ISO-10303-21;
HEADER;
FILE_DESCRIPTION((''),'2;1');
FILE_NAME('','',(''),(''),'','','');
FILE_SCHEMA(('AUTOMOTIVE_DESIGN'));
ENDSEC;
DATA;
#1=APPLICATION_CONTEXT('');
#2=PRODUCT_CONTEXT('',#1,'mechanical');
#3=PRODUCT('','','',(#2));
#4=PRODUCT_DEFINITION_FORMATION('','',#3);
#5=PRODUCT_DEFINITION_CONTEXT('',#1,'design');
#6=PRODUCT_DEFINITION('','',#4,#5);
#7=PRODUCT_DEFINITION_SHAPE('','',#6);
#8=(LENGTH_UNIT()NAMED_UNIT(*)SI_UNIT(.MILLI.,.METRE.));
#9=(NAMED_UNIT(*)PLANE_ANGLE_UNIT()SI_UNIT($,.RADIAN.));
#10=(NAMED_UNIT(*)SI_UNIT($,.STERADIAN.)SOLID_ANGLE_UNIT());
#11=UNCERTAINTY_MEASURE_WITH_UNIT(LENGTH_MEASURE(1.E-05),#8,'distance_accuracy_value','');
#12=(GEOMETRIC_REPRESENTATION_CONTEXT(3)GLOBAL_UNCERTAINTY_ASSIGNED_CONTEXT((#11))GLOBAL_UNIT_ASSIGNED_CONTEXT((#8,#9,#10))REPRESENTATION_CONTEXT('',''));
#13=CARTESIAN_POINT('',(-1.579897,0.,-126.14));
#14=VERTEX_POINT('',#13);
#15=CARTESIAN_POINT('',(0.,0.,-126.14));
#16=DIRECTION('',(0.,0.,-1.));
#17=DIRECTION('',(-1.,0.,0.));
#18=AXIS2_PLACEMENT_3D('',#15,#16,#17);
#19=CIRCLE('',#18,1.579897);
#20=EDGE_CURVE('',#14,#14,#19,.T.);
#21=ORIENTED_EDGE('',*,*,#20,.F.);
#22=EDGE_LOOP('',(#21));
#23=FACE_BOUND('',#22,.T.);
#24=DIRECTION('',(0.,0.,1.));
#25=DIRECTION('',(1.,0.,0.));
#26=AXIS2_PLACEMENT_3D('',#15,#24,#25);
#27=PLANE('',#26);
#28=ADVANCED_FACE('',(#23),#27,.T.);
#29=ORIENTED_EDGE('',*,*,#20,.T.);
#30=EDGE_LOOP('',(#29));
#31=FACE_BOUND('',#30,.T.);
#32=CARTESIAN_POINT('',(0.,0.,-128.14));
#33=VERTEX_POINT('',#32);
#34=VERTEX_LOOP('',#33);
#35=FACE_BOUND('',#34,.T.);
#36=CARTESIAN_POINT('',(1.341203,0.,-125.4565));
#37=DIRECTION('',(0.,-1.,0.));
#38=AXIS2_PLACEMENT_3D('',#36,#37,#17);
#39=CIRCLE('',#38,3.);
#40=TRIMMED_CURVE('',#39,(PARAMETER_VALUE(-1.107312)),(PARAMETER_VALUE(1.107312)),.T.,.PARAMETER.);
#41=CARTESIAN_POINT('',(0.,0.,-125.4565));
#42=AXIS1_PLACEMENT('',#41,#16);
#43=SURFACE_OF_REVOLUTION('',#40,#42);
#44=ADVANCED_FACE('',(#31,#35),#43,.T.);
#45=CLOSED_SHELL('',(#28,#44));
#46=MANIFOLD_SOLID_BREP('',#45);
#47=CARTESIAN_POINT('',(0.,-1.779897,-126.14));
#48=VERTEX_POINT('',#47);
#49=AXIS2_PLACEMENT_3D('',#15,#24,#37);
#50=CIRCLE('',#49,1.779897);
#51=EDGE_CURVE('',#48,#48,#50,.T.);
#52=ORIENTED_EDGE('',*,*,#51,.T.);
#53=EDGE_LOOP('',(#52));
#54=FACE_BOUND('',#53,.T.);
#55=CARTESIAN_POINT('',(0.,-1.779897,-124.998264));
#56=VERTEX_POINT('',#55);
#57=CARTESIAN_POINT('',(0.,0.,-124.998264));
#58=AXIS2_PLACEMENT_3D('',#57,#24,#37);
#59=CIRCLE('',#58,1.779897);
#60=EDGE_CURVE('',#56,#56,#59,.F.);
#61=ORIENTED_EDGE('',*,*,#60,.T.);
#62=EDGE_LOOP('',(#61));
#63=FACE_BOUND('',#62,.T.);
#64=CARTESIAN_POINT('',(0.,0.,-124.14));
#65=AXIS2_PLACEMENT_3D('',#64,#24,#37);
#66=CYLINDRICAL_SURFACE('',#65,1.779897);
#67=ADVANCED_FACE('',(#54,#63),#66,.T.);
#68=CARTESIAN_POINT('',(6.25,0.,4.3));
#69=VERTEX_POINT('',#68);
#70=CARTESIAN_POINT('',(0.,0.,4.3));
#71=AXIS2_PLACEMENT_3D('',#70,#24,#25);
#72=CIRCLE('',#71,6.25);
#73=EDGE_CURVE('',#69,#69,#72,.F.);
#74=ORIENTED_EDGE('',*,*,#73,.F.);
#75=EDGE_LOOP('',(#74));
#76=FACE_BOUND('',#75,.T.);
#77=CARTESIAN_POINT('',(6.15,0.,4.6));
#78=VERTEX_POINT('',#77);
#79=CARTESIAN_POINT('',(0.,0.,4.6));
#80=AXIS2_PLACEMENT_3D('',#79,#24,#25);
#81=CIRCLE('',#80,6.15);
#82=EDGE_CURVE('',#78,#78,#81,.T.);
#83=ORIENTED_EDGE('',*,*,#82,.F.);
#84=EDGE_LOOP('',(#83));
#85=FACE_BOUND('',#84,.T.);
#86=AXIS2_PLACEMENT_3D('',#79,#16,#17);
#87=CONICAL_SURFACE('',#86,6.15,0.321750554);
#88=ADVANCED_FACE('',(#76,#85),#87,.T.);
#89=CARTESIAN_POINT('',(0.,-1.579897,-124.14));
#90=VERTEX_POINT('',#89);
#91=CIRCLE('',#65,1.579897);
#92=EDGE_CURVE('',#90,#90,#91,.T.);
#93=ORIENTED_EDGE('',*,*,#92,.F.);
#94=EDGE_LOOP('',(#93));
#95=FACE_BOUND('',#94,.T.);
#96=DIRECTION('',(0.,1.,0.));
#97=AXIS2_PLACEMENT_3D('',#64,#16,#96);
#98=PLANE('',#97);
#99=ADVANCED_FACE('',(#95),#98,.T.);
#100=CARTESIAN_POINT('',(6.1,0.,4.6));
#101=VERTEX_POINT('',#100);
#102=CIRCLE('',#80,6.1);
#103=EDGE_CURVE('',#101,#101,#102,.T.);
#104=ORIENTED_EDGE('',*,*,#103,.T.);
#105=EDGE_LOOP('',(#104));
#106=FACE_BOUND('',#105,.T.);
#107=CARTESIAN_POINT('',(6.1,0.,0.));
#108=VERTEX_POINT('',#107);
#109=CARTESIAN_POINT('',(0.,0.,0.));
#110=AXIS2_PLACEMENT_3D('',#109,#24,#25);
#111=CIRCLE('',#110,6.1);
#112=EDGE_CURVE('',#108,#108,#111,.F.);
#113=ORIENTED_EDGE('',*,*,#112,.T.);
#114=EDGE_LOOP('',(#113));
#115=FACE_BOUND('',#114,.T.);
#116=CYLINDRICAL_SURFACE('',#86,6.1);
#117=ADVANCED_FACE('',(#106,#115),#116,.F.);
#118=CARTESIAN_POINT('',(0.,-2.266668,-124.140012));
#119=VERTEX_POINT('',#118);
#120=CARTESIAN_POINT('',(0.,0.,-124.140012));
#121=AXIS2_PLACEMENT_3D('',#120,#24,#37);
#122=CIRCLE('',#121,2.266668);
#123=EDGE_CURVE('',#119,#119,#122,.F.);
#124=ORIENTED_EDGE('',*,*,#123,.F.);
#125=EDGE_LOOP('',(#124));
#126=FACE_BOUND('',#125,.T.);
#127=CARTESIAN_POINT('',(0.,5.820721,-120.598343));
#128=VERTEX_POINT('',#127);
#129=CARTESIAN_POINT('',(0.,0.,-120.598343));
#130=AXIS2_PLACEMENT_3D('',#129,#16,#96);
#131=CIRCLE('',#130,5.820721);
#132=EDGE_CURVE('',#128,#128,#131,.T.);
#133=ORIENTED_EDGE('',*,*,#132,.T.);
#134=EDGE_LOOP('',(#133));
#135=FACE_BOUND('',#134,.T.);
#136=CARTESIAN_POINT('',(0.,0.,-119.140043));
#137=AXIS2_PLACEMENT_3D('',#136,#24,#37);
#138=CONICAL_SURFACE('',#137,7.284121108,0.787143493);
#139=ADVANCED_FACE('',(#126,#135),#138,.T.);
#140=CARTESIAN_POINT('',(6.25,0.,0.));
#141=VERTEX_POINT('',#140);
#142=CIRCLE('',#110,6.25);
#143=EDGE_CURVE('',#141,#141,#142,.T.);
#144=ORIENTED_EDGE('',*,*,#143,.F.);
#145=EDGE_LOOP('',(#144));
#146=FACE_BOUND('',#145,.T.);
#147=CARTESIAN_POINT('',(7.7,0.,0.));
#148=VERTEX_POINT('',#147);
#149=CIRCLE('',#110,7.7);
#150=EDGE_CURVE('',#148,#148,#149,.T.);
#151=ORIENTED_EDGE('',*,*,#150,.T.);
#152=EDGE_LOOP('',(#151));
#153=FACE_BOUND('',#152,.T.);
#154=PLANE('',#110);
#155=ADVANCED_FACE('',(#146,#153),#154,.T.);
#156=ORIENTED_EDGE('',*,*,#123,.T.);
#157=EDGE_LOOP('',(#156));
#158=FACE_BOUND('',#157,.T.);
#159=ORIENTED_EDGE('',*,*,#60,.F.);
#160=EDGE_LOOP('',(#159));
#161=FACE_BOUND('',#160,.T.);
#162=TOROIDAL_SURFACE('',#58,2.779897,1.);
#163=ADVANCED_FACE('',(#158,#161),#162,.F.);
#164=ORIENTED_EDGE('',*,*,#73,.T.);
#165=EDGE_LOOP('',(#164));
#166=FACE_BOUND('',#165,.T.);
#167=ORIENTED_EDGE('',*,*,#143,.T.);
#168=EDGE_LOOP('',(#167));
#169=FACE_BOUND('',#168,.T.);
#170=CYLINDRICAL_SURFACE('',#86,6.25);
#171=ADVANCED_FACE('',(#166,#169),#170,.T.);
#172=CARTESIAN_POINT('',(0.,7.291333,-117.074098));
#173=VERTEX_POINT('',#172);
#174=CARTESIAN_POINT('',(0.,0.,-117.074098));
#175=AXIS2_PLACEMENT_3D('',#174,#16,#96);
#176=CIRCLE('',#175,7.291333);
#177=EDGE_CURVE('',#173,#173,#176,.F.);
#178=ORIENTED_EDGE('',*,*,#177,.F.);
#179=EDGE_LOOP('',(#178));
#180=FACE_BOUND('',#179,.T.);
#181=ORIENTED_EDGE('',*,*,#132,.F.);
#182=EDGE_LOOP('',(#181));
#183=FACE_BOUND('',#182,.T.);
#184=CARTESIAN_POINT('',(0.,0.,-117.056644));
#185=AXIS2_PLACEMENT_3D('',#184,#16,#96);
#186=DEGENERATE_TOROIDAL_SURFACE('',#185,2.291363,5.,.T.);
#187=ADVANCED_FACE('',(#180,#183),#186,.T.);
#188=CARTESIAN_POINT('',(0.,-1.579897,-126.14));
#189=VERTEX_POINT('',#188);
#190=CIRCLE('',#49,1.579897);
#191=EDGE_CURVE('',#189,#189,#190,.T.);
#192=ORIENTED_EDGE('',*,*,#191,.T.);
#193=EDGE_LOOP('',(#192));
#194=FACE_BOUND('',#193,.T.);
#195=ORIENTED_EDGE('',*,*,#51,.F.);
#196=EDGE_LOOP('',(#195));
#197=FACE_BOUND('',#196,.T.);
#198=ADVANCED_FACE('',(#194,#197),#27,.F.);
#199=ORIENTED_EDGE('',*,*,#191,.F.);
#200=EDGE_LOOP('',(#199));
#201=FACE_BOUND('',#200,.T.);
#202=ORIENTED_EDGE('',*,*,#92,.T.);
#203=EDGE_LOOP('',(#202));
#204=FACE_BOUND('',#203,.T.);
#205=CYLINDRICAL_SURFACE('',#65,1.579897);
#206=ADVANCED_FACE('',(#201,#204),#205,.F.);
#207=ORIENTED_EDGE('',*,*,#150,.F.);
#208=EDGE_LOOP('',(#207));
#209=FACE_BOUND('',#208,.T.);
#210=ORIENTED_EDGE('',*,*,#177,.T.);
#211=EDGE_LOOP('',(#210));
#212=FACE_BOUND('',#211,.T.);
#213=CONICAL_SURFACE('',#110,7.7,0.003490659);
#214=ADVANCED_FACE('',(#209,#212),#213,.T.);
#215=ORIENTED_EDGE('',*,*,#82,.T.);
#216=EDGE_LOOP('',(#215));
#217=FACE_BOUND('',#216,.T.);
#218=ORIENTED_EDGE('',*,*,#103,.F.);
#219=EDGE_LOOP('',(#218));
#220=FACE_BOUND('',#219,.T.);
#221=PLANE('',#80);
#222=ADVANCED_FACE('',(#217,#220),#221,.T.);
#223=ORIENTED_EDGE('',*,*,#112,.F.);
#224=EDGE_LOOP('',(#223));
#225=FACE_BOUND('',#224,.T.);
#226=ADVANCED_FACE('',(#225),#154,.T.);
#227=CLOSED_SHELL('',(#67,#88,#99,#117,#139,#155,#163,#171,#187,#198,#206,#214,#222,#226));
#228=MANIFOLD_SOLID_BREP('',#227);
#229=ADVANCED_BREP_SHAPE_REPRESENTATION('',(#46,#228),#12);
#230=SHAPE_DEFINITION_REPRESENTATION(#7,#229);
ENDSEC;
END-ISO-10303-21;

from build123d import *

# Parameters (mm, degrees)
SKETCH1_R           = 7.7
BOSS_EXTRUDE3_DEPTH = 126.14
BOSS_EXTRUDE3_DRAFT = -0.2
SKETCH3_R           = 6.25
SKETCH3_R_2         = 6.1
BOSS_EXTRUDE4_DEPTH = 4.6
CHAMFER2_SIZE       = 0.3
CHAMFER2_SIZE2      = 0.1
CROQUIS1_W          = 2
CROQUIS1_H          = 1.579896922
CHAFL_N1_SIZE       = 5
REDONDEO2_R         = 1
REDONDEO4_R         = 5


with BuildPart() as part:
    # Sketch1 → Boss-Extrude3 (with draft: the straight prism first)
    with BuildSketch(Plane.XY):
        Circle(SKETCH1_R)
    extrude(amount=-BOSS_EXTRUDE3_DEPTH)
    # Boss-Extrude3: the draft: its side faces are tilted about the plane it starts from
    boss_extrude3_sides = [part.faces().sort_by_distance(p)[0] for p in [
        (-7.7, 0, -63.07),
    ]]
    draft(boss_extrude3_sides, Plane.XY, BOSS_EXTRUDE3_DRAFT)

    # Sketch3 → Boss-Extrude4 (add)
    with BuildSketch(Plane.XY):
        Circle(SKETCH3_R)
        Circle(SKETCH3_R_2, mode=Mode.SUBTRACT)
    extrude(amount=BOSS_EXTRUDE4_DEPTH)

    # Chamfer2
    chamfer2_edges = [part.edges().sort_by_distance(p)[0] for p in [
        (-6.25, 0, 4.6),
    ]]
    chamfer2_side = [part.faces().sort_by_distance(p)[0] for p in [
        (-6.25, 0, 2.3),
    ]]
    chamfer(chamfer2_edges, length=CHAMFER2_SIZE, length2=CHAMFER2_SIZE2, reference=chamfer2_side[0])

    # Croquis1 → Cortar-Revolución1 (revolve, cut)
    with BuildSketch(Plane(origin=(0, 0, 0), x_dir=(0, 0, -1), z_dir=(1, 0, 0)), mode=Mode.PRIVATE) as cortar_revoluci_n1_sk:
        with Locations((125.14, 0.789948461)):
            Rectangle(CROQUIS1_W, CROQUIS1_H)
        Polygon((126.14, 1.779896922), (126.14, 7.259686548), (124.140012185, 7.266667851), (124.140012185, 1.779896922), align=None)
    revolve(cortar_revoluci_n1_sk.sketch.rotate(Axis((0, 0, -124.14), (0, 0, -1)), 180), axis=Axis((0, 0, -124.14), (0, 0, -1)), mode=Mode.SUBTRACT)

    # Chaflán1
    chafl_n1_edges = [part.edges().sort_by_distance(p)[0] for p in [
        (-7.266667851, 0, -124.140012185),
    ]]
    chamfer(chafl_n1_edges, length=CHAFL_N1_SIZE)

    # Redondeo2
    # the kernel refuses this fillet: 1 mm, written as the material it adds along each edge
    with BuildSketch(Plane(origin=(0, 0, -124.140012185), x_dir=(0, -1, 0), z_dir=(1, 0, 0))) as redondeo2_piece_1:
        with BuildLine():
            CenterArc((2.779896922, 0.858251665), REDONDEO2_R, 180, 59.120843086)
            Line((1.779896922, 0.858251665), (1.759896922, 0.858251665))
            Line((1.759896922, 0.858251665), (1.759896922, 0))
            Line((1.759896922, 0), (1.779896922, -0.02))
            ThreePointArc((1.779896922, -0.02), (2.023282386, -0.02), (2.256403269, -0.017165033))
            Line((2.256403269, -0.017165033), (2.266667851, 0))
        make_face()
    revolve(axis=Axis((0, 0, -124.140012185), (0, 0, -1)))

    # Redondeo4
    redondeo4_edges = [part.edges().sort_by_distance(p)[0] for p in [
        (-7.284121108, 0, -119.140042646),
    ]]
    fillet(redondeo4_edges, radius=REDONDEO4_R)


with BuildPart() as body_2:
    # Croquis2 → Revolución1 (revolve)
    with BuildSketch(Plane(origin=(0, 0, 0), x_dir=(0, 0, -1), z_dir=(1, 0, 0)), mode=Mode.PRIVATE) as revoluci_n1_sk:
        with BuildLine():
            Line((126.14, 0), (126.14, 1.579896922))
            ThreePointArc((126.14, 1.579896922), (127.316121132, 1.012901148), (128.14, 0))
            Line((128.14, 0), (126.14, 0))
        make_face()
    revolve(revoluci_n1_sk.sketch.rotate(Axis((0, 0, -126.431472853), (0, 0, 1)), 180), axis=Axis((0, 0, -126.431472853), (0, 0, 1)))


solid = Compound([part.part, body_2.part])
